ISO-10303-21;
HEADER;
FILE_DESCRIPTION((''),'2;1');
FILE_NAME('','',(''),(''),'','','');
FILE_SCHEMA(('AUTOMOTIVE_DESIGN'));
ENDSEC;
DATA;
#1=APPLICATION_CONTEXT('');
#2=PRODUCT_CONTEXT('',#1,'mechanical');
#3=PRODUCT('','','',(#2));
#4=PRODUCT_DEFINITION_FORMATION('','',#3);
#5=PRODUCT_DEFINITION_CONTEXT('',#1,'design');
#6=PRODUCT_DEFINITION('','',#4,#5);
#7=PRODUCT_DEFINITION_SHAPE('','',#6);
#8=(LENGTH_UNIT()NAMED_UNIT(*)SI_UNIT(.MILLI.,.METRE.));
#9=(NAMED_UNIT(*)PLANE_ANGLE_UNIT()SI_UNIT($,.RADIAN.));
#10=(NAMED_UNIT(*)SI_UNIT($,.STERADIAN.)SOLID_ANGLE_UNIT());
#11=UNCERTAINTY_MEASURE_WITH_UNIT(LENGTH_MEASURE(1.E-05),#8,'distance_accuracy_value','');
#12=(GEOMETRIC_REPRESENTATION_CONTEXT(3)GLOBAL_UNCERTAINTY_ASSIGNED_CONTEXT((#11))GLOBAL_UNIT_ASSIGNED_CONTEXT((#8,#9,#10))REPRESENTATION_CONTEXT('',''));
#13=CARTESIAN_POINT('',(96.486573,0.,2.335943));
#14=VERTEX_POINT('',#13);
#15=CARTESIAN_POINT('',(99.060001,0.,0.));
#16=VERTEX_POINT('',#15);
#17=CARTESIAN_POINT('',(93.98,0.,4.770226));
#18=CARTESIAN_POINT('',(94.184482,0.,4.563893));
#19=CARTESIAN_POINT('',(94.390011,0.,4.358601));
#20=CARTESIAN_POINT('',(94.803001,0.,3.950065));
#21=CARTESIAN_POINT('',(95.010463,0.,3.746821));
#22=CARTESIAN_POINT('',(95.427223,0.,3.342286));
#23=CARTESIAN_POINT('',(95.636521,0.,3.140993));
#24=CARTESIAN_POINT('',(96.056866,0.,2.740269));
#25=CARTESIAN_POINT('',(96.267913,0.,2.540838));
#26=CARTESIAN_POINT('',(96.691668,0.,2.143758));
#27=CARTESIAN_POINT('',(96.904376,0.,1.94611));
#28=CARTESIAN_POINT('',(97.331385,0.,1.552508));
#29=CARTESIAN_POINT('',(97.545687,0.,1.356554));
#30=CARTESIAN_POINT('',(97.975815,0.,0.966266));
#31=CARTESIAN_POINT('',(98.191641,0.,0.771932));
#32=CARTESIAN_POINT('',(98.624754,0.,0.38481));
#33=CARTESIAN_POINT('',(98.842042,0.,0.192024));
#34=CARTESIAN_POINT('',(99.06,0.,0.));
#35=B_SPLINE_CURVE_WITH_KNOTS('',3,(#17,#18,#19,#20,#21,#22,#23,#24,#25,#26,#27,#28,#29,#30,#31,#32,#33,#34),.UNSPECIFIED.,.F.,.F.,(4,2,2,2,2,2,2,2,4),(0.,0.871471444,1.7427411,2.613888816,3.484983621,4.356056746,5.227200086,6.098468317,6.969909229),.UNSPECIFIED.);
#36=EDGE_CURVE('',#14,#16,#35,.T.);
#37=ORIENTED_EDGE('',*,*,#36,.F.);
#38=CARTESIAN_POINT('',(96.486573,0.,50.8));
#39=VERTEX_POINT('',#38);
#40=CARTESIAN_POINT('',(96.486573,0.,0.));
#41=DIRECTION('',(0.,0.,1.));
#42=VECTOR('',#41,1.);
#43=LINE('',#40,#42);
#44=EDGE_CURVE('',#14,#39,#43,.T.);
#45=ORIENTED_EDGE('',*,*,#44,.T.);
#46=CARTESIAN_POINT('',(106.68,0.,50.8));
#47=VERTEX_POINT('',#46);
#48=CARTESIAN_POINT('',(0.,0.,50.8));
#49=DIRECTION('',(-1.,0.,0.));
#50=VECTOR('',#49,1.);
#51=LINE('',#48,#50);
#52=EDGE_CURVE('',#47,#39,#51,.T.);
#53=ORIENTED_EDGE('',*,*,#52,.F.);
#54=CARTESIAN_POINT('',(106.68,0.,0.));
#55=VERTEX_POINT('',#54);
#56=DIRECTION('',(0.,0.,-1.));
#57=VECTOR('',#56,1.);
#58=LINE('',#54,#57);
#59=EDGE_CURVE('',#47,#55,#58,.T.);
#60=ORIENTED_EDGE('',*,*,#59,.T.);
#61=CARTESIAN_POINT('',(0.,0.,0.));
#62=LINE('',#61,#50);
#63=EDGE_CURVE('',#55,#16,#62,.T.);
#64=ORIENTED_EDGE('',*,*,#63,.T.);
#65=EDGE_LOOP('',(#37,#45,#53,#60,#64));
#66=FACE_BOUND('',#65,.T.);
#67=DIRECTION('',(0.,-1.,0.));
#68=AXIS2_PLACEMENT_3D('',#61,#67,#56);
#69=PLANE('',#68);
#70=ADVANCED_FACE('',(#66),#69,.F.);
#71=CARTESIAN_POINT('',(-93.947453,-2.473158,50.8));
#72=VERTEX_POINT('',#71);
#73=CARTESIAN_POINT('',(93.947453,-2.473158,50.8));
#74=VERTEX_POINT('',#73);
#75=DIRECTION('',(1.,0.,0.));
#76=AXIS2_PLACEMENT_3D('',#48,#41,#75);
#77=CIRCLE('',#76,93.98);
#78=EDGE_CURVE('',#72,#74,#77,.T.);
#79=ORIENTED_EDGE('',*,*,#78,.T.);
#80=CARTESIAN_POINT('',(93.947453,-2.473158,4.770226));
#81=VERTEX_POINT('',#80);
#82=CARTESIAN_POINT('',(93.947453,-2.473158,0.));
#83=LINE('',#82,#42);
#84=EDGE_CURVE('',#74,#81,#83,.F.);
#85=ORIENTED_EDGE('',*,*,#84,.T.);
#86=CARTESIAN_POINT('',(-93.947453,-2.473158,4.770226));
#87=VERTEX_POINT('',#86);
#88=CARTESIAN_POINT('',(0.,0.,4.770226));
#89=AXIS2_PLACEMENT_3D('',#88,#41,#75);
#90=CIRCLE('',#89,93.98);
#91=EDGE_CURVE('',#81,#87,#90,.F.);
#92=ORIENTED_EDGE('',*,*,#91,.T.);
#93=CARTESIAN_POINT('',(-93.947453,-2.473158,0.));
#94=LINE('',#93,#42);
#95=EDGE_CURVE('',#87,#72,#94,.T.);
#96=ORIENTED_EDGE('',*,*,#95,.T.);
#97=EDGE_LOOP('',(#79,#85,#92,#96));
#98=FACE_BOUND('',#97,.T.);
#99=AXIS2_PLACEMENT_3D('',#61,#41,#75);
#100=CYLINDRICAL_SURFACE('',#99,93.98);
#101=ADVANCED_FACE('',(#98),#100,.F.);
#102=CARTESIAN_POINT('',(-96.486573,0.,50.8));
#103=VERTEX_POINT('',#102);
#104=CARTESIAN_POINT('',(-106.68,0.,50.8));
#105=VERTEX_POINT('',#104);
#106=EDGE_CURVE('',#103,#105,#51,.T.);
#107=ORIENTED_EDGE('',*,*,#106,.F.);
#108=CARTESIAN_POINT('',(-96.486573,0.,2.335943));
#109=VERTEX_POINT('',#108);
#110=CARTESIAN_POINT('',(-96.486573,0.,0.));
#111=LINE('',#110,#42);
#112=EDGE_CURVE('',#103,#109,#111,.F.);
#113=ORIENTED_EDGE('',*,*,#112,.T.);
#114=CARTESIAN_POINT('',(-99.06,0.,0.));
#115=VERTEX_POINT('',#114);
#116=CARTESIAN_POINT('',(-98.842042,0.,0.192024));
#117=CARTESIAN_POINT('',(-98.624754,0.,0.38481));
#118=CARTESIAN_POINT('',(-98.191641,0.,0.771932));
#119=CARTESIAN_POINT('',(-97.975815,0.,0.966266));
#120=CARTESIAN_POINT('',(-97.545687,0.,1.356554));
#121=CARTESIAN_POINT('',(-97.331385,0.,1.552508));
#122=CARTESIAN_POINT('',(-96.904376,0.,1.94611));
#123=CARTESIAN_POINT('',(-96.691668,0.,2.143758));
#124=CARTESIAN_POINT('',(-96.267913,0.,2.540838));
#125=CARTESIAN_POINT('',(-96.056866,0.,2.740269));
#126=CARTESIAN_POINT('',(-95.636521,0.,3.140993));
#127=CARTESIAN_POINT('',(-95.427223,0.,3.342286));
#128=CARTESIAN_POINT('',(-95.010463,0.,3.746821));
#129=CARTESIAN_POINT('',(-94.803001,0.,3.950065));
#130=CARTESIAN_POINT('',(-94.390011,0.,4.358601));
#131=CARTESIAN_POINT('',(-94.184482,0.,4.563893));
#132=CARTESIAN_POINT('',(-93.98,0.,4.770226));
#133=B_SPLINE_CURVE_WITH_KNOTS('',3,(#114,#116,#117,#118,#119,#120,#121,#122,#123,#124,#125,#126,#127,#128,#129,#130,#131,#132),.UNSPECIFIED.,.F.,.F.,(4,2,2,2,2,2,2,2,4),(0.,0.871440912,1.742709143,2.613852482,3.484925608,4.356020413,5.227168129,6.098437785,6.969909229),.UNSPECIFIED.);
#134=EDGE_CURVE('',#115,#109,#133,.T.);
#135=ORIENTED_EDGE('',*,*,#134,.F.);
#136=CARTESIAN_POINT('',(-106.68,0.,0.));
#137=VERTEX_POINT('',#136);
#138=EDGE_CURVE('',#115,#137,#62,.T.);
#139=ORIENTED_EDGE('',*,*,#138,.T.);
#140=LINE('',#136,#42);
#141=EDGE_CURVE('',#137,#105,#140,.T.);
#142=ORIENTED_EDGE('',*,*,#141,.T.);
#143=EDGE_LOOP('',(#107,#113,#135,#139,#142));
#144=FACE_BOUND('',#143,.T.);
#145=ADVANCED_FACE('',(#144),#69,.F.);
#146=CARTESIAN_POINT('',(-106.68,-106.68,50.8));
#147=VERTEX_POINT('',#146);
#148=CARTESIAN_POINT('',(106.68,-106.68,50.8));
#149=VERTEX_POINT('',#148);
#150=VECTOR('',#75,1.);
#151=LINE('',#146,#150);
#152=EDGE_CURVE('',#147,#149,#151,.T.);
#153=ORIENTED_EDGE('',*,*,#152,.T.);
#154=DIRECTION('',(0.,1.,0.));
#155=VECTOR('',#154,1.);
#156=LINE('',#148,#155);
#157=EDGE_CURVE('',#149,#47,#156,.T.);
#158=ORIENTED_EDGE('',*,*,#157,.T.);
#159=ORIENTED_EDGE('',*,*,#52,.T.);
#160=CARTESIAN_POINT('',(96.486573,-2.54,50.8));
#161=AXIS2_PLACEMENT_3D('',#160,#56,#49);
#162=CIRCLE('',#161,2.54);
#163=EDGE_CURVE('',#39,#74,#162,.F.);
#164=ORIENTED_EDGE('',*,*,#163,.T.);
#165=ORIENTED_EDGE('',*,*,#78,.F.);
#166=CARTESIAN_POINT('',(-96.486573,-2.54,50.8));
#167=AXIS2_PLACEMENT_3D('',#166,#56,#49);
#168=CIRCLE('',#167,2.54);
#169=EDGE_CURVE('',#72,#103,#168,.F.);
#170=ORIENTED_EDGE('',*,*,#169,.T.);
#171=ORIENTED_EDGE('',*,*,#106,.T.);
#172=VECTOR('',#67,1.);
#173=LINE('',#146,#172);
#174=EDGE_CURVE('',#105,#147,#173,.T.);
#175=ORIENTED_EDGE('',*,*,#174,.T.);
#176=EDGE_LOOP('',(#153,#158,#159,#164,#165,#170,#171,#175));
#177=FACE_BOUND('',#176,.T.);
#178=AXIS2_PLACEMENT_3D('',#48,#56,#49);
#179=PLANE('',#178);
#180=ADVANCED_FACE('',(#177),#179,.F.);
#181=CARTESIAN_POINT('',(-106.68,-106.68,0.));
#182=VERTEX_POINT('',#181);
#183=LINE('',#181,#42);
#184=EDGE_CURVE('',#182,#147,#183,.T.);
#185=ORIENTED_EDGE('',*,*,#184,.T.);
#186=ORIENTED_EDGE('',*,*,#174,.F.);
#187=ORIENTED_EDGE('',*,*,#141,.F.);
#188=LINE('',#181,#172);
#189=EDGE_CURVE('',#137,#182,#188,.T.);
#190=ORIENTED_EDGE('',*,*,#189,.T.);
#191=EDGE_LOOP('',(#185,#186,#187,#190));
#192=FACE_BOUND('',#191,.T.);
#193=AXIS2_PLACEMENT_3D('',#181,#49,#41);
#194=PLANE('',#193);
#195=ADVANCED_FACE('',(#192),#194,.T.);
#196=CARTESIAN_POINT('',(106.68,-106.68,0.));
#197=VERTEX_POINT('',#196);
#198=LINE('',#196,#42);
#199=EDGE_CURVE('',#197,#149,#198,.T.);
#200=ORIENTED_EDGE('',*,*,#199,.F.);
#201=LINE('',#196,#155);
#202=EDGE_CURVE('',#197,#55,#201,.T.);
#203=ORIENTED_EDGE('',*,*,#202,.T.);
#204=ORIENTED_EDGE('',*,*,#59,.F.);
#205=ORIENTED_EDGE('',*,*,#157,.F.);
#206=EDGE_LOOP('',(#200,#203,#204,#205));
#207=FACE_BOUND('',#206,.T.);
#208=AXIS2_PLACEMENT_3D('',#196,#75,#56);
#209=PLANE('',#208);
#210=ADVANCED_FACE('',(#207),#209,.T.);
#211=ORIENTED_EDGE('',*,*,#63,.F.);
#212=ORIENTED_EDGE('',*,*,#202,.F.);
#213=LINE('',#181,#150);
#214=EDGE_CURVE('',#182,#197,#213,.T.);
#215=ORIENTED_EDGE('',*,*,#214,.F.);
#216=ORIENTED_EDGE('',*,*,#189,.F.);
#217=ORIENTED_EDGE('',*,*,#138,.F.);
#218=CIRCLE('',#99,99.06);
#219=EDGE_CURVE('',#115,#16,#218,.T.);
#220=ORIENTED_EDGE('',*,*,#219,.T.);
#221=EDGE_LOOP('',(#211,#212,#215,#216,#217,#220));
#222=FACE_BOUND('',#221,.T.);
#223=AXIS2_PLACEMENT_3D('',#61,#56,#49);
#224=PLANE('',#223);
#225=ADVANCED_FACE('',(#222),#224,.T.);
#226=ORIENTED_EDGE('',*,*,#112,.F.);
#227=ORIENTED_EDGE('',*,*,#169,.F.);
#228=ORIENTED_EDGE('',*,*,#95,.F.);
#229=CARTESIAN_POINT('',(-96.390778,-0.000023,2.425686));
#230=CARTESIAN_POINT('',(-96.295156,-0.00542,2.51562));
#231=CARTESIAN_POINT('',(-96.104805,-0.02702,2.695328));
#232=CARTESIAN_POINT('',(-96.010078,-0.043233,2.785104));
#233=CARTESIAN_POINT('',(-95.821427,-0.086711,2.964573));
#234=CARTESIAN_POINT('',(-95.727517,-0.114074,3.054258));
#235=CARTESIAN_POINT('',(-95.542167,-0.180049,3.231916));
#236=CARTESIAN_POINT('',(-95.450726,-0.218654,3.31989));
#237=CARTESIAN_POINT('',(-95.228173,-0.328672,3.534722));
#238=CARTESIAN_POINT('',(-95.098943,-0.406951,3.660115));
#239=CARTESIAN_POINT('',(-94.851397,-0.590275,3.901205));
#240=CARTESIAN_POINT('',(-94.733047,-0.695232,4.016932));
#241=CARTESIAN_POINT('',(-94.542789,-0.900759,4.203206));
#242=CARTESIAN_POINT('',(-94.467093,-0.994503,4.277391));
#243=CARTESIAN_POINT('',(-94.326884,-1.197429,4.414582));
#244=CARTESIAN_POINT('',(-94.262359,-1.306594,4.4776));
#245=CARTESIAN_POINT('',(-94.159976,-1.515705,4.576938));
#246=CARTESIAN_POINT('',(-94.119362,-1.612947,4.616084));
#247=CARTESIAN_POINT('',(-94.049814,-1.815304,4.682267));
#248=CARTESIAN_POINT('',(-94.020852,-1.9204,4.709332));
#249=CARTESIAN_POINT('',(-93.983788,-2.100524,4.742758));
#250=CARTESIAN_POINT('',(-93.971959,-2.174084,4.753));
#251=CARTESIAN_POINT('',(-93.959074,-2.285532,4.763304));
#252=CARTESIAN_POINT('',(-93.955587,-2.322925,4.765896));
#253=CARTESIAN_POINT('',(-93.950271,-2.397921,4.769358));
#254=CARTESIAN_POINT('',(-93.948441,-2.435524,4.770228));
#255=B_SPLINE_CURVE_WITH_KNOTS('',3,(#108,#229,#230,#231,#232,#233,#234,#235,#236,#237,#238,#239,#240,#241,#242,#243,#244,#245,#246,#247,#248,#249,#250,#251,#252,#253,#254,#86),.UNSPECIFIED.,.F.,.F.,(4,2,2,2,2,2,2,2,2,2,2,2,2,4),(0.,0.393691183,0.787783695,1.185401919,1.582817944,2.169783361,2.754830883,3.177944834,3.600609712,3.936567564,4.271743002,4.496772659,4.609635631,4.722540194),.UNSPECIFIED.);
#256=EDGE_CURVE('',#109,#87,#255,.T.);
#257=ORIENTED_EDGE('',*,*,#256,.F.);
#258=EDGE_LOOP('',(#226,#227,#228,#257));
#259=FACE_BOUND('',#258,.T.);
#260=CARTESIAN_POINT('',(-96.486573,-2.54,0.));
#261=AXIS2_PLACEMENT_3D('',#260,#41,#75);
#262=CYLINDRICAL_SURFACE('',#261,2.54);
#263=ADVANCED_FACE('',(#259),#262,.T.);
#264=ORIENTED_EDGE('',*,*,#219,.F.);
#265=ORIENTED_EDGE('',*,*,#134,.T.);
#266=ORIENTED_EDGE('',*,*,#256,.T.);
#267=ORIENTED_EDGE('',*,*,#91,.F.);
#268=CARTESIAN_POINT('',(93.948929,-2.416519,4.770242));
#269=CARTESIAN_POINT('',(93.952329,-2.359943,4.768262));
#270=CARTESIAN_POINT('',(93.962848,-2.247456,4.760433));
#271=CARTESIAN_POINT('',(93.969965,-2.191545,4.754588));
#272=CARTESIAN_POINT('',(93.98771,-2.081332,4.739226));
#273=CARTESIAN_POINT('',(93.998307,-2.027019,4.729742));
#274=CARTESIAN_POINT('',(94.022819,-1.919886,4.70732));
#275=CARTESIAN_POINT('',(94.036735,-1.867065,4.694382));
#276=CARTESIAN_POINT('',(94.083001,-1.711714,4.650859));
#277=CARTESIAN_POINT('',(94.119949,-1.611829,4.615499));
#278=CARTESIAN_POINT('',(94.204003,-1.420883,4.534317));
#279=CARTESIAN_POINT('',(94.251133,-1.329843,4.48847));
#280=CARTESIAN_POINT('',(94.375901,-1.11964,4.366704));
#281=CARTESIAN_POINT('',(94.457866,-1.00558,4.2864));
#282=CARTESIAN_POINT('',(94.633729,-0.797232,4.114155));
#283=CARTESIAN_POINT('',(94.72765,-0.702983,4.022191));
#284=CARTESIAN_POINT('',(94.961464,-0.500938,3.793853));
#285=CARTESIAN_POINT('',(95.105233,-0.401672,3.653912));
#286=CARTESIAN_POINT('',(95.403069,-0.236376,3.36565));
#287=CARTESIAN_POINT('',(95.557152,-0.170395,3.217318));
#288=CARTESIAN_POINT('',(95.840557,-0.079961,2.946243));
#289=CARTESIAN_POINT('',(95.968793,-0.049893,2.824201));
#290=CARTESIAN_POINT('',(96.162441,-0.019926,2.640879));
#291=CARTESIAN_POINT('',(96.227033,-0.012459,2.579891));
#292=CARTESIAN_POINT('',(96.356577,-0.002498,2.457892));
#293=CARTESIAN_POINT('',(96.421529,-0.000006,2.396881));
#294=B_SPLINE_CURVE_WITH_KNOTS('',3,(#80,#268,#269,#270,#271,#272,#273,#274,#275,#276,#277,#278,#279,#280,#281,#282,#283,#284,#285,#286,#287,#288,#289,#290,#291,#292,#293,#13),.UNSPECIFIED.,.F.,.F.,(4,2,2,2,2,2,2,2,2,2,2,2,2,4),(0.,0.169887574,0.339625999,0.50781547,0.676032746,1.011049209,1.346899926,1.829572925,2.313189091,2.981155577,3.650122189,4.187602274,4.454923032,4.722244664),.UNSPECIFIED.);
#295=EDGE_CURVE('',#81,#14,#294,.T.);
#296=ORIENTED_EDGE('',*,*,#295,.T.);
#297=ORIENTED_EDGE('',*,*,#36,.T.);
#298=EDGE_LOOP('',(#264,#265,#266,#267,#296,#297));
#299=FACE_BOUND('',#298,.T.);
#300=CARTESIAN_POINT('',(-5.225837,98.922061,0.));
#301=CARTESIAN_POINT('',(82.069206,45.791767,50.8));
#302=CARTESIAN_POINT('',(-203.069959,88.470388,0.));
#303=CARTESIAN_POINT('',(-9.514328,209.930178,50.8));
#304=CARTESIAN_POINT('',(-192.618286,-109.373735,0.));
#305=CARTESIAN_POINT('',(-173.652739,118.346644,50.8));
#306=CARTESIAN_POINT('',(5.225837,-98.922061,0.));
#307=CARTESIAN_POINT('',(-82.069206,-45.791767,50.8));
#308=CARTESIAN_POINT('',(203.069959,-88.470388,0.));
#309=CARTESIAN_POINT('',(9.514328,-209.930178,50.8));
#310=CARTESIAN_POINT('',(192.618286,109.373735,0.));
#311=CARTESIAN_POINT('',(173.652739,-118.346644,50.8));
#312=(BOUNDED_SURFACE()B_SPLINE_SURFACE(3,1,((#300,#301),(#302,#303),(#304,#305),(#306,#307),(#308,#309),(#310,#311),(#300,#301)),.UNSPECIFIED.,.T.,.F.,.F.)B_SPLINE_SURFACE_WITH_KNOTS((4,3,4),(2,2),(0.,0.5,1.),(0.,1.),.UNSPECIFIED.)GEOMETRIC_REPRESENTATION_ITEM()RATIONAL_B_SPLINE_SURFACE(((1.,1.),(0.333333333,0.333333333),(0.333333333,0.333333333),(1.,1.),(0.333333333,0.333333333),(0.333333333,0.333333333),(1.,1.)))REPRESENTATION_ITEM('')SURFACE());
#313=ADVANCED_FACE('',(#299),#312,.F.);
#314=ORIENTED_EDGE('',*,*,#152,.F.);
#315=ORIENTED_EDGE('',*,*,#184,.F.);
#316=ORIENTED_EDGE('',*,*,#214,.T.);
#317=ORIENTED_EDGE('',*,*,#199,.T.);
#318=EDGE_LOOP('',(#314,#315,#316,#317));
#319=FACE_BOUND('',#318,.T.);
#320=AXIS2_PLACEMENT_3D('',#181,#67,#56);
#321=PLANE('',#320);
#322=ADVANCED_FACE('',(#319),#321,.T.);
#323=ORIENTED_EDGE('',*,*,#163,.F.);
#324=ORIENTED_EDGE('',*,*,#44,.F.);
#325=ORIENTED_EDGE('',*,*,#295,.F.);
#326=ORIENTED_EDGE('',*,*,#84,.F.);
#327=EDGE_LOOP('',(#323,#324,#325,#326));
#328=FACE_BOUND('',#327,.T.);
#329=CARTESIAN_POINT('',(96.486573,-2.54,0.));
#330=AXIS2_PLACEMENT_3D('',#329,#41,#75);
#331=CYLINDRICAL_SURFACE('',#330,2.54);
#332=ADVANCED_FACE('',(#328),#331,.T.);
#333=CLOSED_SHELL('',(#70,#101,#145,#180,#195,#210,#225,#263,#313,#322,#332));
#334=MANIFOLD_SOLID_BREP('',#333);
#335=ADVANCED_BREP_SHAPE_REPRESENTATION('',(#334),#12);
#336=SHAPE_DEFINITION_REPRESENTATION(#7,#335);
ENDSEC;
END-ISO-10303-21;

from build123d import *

# Parameters (mm, degrees)
SKETCH2_W           = 213.36
SKETCH2_H           = 213.36
SKETCH2_R           = 93.98
BOSS_EXTRUDE1_DEPTH = 50.8
SKETCH4_W           = 431.498092941
SKETCH4_H           = 427.351859682
CUT_EXTRUDE1_DEPTH  = 106.68
FILLET1_R           = 2.54


with BuildPart() as part:
    # Sketch2 → Boss-Extrude1 (new body)
    with BuildSketch(Plane.XY.offset(50.8)):
        Rectangle(SKETCH2_W, SKETCH2_H)
        Circle(SKETCH2_R, mode=Mode.SUBTRACT)
    extrude(amount=-BOSS_EXTRUDE1_DEPTH)

    # Cut-Loft1: read off the stored shape, not the designer's step
    # Cut-Loft1: loft between two sections, ruled curve by curve
    cut_loft1_from = [
        Edge.make_bspline([(-5.225836659, 98.922061398, 0), (-203.069959455, 88.47038808, 0), (-192.618286137, -109.373734716, 0), (5.225836659, -98.922061398, 0), (203.069959455, -88.47038808, 0), (192.618286137, 109.373734716, 0), (-5.225836659, 98.922061398, 0)], [0, 0, 0, 0, 0.5, 0.5, 0.5, 1, 1, 1, 1], 3, [1, 0.333333333, 0.333333333, 1, 0.333333333, 0.333333333, 1]),
    ]
    cut_loft1_to = [
        Edge.make_bspline([(82.069205503, 45.791766816, 50.8), (-9.514328128, 209.930177822, 50.8), (-173.652739134, 118.34664419, 50.8), (-82.069205503, -45.791766816, 50.8), (9.514328128, -209.930177822, 50.8), (173.652739134, -118.34664419, 50.8), (82.069205503, 45.791766816, 50.8)], [0, 0, 0, 0, 0.5, 0.5, 0.5, 1, 1, 1, 1], 3, [1, 0.333333333, 0.333333333, 1, 0.333333333, 0.333333333, 1]),
    ]
    cut_loft1 = Solid(Shell([*[Face.make_surface_from_curves(cut_loft1_from[k], cut_loft1_to[k]) for k in range(1)], Face(Wire(cut_loft1_from)), Face(Wire(cut_loft1_to))]))
    add(cut_loft1, mode=Mode.SUBTRACT)

    # Sketch4 → Cut-Extrude1 (cut)
    with BuildSketch(Plane(origin=(0, 106.68, 0), x_dir=(1, 0, 0), z_dir=(0, 1, 0))):
        with Locations((-43.743226098, -53.764043901)):
            Rectangle(SKETCH4_W, SKETCH4_H)
    extrude(amount=-CUT_EXTRUDE1_DEPTH, mode=Mode.SUBTRACT)

    # Fillet1
    fillet1_edges = [part.edges().sort_by_distance(p)[0] for p in [
        (93.98, 0, 27.785112978),
        (-93.98, 0, 27.785112678),
    ]]
    fillet(fillet1_edges, radius=FILLET1_R)


solid = part.part
